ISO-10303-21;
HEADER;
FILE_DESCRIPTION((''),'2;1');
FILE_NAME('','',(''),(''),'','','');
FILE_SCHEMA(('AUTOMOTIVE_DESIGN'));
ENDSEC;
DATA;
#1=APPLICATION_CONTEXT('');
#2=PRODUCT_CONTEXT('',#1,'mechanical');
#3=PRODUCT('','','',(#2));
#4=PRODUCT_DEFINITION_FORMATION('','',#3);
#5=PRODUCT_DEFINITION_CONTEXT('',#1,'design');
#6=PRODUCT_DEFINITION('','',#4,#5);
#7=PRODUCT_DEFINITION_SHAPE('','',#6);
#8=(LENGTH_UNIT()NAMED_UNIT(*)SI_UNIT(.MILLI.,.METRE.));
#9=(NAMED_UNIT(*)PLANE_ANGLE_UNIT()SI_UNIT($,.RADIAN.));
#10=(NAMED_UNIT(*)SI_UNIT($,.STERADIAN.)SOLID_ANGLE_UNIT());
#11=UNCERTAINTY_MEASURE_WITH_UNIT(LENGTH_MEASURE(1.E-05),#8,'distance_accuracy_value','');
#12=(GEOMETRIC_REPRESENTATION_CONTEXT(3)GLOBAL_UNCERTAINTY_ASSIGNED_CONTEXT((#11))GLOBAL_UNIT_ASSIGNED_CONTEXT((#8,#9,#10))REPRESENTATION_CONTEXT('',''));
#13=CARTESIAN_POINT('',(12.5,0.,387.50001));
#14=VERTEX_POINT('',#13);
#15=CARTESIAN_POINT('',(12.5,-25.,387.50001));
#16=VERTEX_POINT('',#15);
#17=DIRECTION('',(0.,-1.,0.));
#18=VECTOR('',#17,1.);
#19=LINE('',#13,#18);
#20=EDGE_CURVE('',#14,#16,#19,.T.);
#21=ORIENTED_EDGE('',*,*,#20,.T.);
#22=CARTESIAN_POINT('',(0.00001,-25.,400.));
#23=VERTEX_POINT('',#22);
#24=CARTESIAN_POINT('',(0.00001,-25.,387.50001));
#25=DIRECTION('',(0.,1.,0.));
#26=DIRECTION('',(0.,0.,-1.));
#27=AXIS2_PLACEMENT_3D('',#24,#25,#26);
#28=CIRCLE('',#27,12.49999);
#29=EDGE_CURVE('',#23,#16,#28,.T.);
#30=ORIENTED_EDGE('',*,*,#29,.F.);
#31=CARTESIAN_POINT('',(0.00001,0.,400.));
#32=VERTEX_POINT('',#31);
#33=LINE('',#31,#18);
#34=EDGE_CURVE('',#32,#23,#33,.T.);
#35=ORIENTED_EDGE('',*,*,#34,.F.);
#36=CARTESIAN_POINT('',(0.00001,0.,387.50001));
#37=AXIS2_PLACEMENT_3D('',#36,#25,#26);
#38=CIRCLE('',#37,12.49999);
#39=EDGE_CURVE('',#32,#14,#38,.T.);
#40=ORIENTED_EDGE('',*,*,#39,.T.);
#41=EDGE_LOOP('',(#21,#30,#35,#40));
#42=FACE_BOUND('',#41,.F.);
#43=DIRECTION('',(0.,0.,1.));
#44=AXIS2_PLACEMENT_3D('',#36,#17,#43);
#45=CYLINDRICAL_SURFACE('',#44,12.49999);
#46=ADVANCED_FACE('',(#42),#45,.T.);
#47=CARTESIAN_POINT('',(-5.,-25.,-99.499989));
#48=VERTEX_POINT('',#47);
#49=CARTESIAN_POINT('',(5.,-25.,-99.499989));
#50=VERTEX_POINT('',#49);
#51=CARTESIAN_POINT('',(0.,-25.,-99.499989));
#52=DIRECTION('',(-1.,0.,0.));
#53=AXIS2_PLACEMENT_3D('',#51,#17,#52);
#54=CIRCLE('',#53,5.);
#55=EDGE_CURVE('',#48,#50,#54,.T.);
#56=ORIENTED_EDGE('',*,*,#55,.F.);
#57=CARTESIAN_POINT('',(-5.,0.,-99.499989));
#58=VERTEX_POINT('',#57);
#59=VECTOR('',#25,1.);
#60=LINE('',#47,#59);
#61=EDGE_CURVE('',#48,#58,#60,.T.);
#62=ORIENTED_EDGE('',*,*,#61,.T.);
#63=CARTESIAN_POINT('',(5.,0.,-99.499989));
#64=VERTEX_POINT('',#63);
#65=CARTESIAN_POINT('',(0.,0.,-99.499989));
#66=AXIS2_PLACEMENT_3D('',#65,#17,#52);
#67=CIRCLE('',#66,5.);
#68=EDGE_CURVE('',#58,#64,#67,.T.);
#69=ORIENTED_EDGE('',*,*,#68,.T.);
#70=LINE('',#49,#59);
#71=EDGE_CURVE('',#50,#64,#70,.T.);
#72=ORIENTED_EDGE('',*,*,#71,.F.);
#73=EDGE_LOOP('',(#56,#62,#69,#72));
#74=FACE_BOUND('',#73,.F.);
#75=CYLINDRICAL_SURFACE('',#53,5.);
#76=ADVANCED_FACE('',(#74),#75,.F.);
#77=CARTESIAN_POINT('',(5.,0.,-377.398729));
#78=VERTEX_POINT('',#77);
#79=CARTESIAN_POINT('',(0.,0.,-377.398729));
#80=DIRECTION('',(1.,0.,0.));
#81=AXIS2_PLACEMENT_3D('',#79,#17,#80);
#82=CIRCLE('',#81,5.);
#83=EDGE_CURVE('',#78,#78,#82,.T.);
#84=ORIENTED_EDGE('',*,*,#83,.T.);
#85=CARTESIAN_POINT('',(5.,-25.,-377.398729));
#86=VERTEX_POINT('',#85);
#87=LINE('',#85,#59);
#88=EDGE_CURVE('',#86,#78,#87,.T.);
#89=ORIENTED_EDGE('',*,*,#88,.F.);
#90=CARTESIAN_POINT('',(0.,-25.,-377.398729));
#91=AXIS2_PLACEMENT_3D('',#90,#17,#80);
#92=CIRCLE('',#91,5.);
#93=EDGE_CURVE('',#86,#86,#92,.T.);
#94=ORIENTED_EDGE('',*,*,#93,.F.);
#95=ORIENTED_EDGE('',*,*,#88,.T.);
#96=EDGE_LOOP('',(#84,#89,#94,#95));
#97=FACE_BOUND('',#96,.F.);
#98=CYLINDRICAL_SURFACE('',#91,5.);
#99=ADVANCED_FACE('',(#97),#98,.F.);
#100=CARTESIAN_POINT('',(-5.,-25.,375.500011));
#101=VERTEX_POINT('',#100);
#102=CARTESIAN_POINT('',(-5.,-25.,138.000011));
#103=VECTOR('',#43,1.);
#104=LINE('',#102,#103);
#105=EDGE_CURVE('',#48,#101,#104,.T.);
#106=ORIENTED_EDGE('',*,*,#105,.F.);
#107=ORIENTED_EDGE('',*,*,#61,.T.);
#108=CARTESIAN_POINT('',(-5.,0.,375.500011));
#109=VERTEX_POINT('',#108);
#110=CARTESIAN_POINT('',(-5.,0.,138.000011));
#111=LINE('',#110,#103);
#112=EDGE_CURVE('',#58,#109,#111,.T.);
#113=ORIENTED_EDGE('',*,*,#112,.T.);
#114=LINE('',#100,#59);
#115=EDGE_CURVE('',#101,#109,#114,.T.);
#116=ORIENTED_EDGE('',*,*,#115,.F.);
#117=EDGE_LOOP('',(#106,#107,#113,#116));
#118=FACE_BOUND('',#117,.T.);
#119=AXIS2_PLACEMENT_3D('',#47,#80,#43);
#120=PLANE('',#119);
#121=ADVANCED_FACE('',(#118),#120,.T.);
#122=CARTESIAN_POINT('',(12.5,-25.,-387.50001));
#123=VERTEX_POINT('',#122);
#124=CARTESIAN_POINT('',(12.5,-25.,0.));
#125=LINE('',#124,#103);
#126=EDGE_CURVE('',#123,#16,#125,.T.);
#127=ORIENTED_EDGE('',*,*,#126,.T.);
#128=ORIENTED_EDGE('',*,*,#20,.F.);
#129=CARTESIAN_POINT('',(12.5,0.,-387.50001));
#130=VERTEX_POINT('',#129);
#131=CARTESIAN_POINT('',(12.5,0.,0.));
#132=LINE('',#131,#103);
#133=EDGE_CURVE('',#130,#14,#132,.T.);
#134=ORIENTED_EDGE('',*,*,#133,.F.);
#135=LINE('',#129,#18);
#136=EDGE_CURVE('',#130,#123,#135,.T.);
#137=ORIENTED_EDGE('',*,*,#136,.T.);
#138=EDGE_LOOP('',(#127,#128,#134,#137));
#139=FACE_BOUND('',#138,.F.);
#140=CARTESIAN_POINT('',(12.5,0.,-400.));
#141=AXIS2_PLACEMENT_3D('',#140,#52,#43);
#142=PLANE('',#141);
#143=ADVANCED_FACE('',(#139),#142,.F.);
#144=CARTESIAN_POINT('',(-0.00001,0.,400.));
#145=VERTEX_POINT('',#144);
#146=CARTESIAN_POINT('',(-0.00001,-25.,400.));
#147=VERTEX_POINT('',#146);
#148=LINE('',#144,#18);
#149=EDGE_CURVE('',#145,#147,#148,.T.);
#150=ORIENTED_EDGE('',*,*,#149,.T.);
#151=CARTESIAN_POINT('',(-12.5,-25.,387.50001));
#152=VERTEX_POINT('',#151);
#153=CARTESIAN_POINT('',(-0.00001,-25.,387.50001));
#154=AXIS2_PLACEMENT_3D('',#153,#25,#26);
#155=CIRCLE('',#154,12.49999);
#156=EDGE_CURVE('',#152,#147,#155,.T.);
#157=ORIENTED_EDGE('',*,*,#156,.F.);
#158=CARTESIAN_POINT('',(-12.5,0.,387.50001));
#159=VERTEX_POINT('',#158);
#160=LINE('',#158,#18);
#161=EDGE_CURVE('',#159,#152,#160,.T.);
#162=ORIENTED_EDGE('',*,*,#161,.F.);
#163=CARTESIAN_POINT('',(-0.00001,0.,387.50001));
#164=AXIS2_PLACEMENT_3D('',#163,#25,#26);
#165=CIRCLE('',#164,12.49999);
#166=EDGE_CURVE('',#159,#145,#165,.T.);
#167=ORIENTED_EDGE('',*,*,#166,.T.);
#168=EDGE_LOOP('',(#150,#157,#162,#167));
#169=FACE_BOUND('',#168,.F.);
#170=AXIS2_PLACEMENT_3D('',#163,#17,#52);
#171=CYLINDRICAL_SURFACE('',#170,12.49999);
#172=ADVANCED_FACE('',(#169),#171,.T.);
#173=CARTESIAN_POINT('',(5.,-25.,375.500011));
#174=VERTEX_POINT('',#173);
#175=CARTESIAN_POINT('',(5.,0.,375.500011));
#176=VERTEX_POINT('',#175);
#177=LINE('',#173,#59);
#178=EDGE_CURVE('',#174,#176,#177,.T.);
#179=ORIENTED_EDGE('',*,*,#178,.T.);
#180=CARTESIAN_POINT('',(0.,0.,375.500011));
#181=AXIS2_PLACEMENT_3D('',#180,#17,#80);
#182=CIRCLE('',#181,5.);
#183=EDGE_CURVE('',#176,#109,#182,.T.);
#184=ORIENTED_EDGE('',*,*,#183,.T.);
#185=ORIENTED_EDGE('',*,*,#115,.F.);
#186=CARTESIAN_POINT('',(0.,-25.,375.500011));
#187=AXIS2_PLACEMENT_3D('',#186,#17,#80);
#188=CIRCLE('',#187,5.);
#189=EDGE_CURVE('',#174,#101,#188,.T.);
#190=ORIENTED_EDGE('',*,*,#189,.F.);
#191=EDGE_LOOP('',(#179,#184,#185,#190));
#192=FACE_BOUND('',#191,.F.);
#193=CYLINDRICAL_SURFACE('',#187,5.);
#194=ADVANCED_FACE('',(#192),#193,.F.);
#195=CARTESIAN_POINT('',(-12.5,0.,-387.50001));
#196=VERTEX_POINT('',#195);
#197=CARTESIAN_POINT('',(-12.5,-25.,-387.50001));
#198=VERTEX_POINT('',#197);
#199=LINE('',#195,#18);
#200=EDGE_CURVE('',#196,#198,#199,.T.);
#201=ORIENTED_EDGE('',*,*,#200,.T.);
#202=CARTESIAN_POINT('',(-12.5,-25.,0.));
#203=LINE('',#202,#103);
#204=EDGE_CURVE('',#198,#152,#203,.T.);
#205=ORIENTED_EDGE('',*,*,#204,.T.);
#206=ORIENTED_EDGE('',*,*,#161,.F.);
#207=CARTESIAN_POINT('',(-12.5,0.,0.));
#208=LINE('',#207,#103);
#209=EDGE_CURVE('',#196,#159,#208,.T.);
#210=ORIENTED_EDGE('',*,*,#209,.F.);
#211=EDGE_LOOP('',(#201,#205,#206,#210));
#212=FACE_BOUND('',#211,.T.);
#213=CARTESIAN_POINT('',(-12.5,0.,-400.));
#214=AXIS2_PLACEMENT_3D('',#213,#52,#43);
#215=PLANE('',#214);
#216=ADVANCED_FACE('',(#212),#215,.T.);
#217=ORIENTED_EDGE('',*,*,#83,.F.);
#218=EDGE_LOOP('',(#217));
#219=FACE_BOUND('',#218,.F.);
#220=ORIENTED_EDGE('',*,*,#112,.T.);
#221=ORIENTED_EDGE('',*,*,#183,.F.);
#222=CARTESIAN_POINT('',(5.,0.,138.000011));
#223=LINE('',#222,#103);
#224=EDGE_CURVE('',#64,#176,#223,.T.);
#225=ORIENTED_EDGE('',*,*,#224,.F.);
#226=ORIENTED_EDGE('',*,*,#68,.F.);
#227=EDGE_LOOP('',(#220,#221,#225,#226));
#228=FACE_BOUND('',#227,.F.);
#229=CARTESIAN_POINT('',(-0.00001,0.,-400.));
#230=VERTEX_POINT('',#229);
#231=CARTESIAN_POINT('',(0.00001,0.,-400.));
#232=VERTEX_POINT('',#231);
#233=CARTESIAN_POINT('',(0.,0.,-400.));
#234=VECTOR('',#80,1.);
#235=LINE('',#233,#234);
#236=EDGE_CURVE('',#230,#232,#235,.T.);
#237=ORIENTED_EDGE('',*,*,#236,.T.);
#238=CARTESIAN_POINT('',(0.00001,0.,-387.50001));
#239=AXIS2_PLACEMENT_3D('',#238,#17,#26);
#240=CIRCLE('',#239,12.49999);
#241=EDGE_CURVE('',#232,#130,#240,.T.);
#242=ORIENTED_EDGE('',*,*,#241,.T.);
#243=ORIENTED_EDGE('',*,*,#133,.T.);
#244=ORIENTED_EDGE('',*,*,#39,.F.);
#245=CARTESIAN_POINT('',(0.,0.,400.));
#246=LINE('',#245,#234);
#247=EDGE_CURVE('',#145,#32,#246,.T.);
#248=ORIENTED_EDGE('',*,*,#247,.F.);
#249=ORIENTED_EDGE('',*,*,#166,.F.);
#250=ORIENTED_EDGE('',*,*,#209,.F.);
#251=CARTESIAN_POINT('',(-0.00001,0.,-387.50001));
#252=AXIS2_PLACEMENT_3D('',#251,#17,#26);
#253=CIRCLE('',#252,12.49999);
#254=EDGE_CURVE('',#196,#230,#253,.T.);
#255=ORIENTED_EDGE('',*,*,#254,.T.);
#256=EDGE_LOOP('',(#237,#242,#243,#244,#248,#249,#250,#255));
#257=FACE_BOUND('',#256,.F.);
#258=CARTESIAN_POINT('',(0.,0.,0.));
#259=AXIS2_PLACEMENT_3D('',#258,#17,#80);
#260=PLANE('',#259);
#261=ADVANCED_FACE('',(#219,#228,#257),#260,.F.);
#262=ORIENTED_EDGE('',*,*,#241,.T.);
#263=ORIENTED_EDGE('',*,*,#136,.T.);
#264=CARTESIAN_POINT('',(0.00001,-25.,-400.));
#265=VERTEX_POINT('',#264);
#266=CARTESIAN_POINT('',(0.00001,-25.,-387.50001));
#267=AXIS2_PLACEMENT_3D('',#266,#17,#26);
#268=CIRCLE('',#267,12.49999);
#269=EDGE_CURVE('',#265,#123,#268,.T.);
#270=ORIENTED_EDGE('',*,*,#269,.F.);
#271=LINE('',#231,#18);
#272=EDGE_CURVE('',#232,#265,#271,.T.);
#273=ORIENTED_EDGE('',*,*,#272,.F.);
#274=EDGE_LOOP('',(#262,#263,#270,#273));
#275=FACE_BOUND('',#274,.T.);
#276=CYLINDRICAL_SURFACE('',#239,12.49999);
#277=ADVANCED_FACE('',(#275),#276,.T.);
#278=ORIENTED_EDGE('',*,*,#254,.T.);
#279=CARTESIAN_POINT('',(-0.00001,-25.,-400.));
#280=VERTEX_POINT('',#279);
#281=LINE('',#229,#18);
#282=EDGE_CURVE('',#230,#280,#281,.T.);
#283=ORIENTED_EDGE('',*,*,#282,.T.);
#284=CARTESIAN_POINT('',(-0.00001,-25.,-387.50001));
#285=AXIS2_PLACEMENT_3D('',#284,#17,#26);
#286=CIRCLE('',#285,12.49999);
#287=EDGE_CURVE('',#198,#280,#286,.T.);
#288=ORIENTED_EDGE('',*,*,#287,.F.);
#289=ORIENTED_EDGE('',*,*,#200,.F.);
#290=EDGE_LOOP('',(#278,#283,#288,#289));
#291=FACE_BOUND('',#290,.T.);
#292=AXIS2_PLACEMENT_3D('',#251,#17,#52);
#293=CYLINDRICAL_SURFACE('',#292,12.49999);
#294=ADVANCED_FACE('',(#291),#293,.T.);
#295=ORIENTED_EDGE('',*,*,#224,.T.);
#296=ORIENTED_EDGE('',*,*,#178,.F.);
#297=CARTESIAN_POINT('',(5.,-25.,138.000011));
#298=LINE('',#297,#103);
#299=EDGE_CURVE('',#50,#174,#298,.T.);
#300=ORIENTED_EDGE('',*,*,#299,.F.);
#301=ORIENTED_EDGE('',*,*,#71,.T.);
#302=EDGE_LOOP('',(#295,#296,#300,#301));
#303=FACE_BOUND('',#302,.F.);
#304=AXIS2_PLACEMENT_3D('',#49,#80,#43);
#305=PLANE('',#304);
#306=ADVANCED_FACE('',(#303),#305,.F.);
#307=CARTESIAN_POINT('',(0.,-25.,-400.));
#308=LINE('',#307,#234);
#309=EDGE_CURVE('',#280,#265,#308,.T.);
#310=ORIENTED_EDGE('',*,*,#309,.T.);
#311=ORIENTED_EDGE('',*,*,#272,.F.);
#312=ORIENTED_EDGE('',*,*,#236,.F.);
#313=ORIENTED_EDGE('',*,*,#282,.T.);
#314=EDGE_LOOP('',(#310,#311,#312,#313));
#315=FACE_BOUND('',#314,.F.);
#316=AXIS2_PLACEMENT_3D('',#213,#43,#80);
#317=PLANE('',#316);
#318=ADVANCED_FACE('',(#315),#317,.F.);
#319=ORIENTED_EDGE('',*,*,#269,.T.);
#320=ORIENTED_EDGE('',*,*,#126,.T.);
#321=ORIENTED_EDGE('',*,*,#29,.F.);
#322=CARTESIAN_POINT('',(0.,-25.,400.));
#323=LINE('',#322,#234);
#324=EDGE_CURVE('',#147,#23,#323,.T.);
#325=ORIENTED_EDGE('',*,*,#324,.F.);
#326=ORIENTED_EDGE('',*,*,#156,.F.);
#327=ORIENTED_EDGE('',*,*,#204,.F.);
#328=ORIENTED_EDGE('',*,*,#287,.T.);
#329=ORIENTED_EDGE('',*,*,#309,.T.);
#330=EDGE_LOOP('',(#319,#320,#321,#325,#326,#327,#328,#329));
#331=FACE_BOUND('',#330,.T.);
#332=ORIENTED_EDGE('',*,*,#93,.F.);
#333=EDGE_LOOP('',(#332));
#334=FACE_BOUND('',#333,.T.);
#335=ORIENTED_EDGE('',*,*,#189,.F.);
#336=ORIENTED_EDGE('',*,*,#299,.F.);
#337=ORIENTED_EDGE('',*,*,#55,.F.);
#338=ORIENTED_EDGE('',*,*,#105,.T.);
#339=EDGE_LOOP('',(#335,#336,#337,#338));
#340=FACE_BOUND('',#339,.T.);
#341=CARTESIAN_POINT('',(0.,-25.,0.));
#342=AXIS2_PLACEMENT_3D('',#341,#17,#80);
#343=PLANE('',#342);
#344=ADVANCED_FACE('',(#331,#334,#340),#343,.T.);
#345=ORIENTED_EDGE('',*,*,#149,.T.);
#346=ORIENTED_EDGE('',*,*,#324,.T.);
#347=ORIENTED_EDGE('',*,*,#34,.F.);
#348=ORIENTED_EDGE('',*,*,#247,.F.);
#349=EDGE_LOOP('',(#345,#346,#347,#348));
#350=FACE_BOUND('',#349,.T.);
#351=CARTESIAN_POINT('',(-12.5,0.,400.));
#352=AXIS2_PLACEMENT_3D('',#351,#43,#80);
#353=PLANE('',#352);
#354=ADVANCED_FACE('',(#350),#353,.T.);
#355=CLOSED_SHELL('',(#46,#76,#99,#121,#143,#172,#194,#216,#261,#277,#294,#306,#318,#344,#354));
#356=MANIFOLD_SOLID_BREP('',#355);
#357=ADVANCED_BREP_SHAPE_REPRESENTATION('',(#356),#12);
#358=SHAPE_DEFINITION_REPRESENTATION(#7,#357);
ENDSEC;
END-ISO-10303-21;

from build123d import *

# Parameters (mm, degrees)
F0_W     = 25
F0_H     = 800
F1_DEPTH = 25
F2_W     = 10
F2_H     = 475
F3_DEPTH = 25
F4_R     = 5
F5_DEPTH = 25
F7_DEPTH = 25
F9_DEPTH = 25
F10_R    = 12.49999
F11_R    = 12.49999


# Not quite as in the source:
# - a fillet or chamfer is up to 0.001 mm smaller than in the source, because OpenCascade refuses the exact size


with BuildPart() as f1:
    # F0 (on Front) → F1 (new body)
    with BuildSketch(Plane.XZ):
        Rectangle(F0_W, F0_H)
    extrude(amount=F1_DEPTH)

    # F2 (on face) → F3 (cut)
    with BuildSketch(Plane.XZ.offset(25)):
        with Locations((0, 138.0000114441)):
            Rectangle(F2_W, F2_H)
    extrude(amount=-F3_DEPTH, mode=Mode.SUBTRACT)

    # F4 (on face) → F5 (cut)
    with BuildSketch(Plane.XZ.offset(25)):
        with Locations((0, -377.3987293243)):
            Circle(F4_R)
    extrude(amount=-F5_DEPTH, mode=Mode.SUBTRACT)

    # F6 (on face) → F7 (cut)
    with BuildSketch(Plane.XZ.offset(25)):
        with BuildLine():
            Line((-5, 375.5000114441), (5, 375.5000114441))
            ThreePointArc((5, 375.5000114441), (0, 380.5000114441), (-5, 375.5000114441))
        make_face()
    extrude(amount=-F7_DEPTH, mode=Mode.SUBTRACT)

    # F8 (on face) → F9 (cut)
    with BuildSketch(Plane.XZ.offset(25)):
        with BuildLine():
            Line((5, -99.4999885559), (-5, -99.4999885559))
            ThreePointArc((-5, -99.4999885559), (0, -104.4999885559), (5, -99.4999885559))
        make_face()
    extrude(amount=-F9_DEPTH, mode=Mode.SUBTRACT)

    # F10 (radius 12.5 in the source; OpenCascade refuses exactly that, so slightly less here)
    f10_edges = [f1.edges().sort_by_distance(p)[0] for p in [
        (-12.5, -12.5, 400),
        (12.5, -12.5, 400),
    ]]
    fillet(f10_edges, radius=F10_R)

    # F11 (radius 12.5 in the source; OpenCascade refuses exactly that, so slightly less here)
    f11_edges = [f1.edges().sort_by_distance(p)[0] for p in [
        (-12.5, -12.5, -400),
        (12.5, -12.5, -400),
    ]]
    fillet(f11_edges, radius=F11_R)


solid = f1.part
